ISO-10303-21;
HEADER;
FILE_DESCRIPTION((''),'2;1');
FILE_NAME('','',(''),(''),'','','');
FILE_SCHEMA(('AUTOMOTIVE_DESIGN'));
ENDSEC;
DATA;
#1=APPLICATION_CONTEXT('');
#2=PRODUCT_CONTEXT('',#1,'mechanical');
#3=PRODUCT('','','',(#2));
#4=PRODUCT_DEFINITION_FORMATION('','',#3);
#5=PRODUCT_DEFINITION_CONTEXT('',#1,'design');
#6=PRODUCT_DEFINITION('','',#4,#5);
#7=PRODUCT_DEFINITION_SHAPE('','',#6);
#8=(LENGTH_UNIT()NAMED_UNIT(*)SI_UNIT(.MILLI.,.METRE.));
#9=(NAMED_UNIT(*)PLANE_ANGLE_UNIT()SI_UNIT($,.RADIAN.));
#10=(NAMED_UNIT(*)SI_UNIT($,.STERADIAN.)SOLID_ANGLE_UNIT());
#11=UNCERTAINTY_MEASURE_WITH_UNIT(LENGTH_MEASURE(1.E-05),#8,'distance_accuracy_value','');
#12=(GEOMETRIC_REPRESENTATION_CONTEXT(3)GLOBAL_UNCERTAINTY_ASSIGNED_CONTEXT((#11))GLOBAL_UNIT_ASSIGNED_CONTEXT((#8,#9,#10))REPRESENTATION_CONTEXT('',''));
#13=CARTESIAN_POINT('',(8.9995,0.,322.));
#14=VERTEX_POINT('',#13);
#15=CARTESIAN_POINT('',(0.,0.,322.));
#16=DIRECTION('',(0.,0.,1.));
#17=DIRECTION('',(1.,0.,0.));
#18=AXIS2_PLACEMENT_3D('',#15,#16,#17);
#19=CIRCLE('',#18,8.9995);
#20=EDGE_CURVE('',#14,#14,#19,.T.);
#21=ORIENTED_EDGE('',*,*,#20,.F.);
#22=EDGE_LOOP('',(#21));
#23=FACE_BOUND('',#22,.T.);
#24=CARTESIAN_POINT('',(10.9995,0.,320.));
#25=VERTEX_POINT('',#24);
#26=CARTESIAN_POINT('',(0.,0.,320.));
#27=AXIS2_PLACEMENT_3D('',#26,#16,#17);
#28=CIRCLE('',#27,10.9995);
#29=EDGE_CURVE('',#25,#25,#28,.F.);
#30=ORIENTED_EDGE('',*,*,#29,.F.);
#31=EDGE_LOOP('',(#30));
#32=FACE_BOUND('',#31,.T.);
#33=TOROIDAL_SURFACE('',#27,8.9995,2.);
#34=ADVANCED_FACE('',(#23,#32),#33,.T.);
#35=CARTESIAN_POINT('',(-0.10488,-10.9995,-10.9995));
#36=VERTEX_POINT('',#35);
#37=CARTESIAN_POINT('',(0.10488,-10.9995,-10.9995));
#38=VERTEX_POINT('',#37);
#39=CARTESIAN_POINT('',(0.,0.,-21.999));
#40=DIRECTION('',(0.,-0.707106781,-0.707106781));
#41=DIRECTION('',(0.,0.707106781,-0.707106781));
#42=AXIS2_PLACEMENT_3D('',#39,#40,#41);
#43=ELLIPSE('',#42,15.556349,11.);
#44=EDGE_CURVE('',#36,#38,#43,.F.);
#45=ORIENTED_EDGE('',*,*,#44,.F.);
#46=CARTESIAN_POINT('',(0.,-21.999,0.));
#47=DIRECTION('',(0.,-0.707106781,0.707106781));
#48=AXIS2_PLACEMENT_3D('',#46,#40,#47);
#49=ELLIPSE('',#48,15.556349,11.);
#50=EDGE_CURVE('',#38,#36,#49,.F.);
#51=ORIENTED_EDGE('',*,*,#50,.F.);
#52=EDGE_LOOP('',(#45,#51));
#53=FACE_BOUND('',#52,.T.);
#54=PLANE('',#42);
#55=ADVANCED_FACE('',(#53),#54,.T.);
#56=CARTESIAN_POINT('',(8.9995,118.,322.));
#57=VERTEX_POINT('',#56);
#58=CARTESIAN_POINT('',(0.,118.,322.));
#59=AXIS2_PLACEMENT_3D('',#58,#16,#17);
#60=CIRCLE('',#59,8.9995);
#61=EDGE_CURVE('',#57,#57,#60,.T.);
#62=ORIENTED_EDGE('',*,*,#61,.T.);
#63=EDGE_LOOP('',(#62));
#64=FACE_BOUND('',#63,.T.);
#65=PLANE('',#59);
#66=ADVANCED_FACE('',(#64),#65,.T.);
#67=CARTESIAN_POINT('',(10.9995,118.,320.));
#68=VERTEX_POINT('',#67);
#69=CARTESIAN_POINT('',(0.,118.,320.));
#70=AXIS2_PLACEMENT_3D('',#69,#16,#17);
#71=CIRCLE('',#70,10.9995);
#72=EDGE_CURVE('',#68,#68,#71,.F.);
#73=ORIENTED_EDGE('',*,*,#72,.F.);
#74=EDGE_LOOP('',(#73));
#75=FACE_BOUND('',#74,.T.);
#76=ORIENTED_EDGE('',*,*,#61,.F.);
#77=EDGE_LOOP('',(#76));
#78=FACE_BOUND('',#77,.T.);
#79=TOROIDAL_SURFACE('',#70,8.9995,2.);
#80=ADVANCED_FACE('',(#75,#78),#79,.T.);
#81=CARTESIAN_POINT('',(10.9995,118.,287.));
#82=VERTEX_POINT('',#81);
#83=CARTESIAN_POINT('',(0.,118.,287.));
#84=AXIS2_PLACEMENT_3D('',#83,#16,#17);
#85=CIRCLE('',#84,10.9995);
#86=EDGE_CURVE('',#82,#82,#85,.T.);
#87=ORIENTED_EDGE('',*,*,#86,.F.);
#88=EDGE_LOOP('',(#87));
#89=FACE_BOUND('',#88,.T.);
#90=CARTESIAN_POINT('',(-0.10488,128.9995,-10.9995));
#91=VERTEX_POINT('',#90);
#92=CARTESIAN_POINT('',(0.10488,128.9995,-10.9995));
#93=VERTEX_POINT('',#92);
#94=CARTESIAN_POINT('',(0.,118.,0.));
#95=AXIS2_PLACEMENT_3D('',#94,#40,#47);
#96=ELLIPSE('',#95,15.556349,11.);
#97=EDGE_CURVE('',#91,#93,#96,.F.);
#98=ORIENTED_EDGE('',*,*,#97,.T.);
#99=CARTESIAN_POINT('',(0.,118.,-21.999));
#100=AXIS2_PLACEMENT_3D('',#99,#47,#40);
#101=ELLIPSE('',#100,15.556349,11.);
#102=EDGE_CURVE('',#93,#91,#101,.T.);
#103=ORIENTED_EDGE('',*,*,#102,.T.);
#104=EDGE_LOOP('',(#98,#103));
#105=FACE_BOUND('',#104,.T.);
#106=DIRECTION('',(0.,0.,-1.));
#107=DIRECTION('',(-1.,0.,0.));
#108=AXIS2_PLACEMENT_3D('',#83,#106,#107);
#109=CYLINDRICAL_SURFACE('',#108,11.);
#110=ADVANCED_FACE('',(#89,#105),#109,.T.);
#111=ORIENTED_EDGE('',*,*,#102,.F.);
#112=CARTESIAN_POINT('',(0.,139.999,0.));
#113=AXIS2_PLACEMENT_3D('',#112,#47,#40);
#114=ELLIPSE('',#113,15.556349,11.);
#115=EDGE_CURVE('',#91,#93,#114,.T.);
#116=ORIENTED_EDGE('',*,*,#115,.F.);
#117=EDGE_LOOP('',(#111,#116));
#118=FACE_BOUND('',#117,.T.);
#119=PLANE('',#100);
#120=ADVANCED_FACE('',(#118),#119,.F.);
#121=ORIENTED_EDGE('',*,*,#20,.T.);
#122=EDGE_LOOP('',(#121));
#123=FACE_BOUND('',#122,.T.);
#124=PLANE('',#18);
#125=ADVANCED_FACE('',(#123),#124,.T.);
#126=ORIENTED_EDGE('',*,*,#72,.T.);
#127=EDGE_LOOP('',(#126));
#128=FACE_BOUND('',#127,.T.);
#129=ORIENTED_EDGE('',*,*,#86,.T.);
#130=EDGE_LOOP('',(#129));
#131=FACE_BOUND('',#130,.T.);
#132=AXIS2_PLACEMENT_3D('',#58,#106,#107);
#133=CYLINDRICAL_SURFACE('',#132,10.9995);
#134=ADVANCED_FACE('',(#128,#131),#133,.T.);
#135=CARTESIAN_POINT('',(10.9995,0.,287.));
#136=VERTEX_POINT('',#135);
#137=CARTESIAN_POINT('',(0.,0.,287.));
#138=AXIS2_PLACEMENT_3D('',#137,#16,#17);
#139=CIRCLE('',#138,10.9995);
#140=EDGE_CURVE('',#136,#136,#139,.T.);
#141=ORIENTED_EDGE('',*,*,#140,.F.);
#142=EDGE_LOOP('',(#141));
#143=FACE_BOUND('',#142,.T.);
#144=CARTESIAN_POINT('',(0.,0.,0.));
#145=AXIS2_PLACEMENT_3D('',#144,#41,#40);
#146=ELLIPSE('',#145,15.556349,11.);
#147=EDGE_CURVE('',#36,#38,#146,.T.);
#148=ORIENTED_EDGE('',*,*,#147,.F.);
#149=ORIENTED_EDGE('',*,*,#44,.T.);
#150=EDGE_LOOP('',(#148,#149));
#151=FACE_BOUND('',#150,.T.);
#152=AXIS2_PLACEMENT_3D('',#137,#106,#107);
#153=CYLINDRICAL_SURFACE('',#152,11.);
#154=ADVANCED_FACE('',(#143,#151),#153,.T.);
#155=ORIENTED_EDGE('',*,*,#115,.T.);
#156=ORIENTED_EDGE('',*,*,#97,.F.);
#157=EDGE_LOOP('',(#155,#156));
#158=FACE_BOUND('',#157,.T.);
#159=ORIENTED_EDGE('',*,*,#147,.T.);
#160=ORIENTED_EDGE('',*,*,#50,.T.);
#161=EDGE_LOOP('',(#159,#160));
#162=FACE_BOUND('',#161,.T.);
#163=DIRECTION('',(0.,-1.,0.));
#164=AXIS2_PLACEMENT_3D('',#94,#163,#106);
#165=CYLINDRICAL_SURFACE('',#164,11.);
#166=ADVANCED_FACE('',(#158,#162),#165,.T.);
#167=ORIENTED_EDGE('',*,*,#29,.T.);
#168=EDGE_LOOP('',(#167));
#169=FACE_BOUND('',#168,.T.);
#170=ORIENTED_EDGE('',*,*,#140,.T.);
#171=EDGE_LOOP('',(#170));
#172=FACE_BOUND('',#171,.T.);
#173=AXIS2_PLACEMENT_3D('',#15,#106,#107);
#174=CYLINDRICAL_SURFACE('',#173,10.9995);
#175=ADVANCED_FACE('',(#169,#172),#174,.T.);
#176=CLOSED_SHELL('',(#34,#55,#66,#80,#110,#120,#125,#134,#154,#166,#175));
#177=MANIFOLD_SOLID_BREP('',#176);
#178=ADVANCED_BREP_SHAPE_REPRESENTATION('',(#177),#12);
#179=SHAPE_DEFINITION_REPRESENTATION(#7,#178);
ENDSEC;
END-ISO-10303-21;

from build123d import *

# Parameters (mm, degrees)
SKETCH_1_R             = 11
EXTRUDE_1_DEPTH        = 287
SKETCH_2_R             = 11
EXTRUDE_2_DEPTH        = 118
PATTERN_LINEAR_1_COUNT = 2
PATTERN_LINEAR_1_PITCH = 118
CHAMFER_3_SIZE         = 21.999
SKETCH_3_R             = 10.9995
EXTRUDE_3_DEPTH        = 35
FILLET_1_R             = 2


with BuildPart() as part:
    # 草图1 → 拉伸1 (new body)
    with BuildSketch(Plane.XY):
        Circle(SKETCH_1_R)
    extrude_1 = extrude(amount=EXTRUDE_1_DEPTH)

    # 草图2 → 拉伸2 (add)
    with BuildSketch(Plane(origin=(0, 0, 0), x_dir=(1, 0, 0), z_dir=(0, 1, 0))):
        with Locations(Location((0, 0, 0), (0, 0, 180))):
            Circle(SKETCH_2_R)
    extrude(amount=EXTRUDE_2_DEPTH)

    # 阵列(线性)1: 拉伸1 ×2
    with Locations(*[(0, i * PATTERN_LINEAR_1_PITCH, 0) for i in range(1, PATTERN_LINEAR_1_COUNT)]):
        add(extrude_1)

    # 倒角3
    # the kernel refuses this chamfer: 21.999 mm, written as the material it adds along each edge
    with BuildSketch(Plane(origin=(67.574454052, 0, 0), x_dir=(0, -0.9996219169112966, 0.027495876610586372), z_dir=(-1, 0, 0))) as chamfer_3_piece_1_section:
        Polygon((CHAMFER_3_SIZE * 0.999621916911, -CHAMFER_3_SIZE * 0.0274958766106), (-CHAMFER_3_SIZE * 0.0274958766106, -CHAMFER_3_SIZE * 0.999621916911), (0, 0), align=None)
    chamfer_3_piece_1 = extrude(amount=135.148908105, mode=Mode.PRIVATE)
    chamfer_3_piece_1 = chamfer_3_piece_1 & Plane(origin=(0, 0, -4.859651136), x_dir=(1, 0, 0), z_dir=(0, 0, -1)) * Cylinder(11, 359, mode=Mode.PRIVATE)
    chamfer_3_piece_1 = chamfer_3_piece_1 & Plane(origin=(0, -4.859651136, 0), x_dir=(-1, 0, 0), z_dir=(0, -1, 0)) * Cylinder(11, 359, mode=Mode.PRIVATE)
    add(chamfer_3_piece_1)
    with BuildSketch(Plane(origin=(-67.574454052, 118, 0), x_dir=(0, -0.027495876610586358, -0.9996219169112966), z_dir=(1, 0, 0))) as chamfer_3_piece_2_section:
        Polygon((CHAMFER_3_SIZE * 0.999621916911, CHAMFER_3_SIZE * 0.0274958766106), (-CHAMFER_3_SIZE * 0.0274958766106, CHAMFER_3_SIZE * 0.999621916911), (0, 0), align=None)
    chamfer_3_piece_2 = extrude(amount=135.148908105, mode=Mode.PRIVATE)
    chamfer_3_piece_2 = chamfer_3_piece_2 & Plane(origin=(0, 122.859651136, 0), x_dir=(-1, 0, 0), z_dir=(0, -1, 0)) * Cylinder(11, 359, mode=Mode.PRIVATE)
    chamfer_3_piece_2 = chamfer_3_piece_2 & Plane(origin=(0, 118, -4.859651136), x_dir=(1, 0, 0), z_dir=(0, 0, -1)) * Cylinder(11, 359, mode=Mode.PRIVATE)
    add(chamfer_3_piece_2)

    # 草图3 → 拉伸3 (add)
    with BuildSketch(Plane.XY.offset(287)):
        with Locations((0, 118)):
            Circle(SKETCH_3_R)
        Circle(SKETCH_3_R)
    extrude(amount=EXTRUDE_3_DEPTH)

    # 圆角1
    fillet_1_edges = [part.edges().sort_by_distance(p)[0] for p in [
        (-10.9995, 118, 322),
        (-10.9995, 0, 322),
    ]]
    fillet(fillet_1_edges, radius=FILLET_1_R)


solid = part.part
